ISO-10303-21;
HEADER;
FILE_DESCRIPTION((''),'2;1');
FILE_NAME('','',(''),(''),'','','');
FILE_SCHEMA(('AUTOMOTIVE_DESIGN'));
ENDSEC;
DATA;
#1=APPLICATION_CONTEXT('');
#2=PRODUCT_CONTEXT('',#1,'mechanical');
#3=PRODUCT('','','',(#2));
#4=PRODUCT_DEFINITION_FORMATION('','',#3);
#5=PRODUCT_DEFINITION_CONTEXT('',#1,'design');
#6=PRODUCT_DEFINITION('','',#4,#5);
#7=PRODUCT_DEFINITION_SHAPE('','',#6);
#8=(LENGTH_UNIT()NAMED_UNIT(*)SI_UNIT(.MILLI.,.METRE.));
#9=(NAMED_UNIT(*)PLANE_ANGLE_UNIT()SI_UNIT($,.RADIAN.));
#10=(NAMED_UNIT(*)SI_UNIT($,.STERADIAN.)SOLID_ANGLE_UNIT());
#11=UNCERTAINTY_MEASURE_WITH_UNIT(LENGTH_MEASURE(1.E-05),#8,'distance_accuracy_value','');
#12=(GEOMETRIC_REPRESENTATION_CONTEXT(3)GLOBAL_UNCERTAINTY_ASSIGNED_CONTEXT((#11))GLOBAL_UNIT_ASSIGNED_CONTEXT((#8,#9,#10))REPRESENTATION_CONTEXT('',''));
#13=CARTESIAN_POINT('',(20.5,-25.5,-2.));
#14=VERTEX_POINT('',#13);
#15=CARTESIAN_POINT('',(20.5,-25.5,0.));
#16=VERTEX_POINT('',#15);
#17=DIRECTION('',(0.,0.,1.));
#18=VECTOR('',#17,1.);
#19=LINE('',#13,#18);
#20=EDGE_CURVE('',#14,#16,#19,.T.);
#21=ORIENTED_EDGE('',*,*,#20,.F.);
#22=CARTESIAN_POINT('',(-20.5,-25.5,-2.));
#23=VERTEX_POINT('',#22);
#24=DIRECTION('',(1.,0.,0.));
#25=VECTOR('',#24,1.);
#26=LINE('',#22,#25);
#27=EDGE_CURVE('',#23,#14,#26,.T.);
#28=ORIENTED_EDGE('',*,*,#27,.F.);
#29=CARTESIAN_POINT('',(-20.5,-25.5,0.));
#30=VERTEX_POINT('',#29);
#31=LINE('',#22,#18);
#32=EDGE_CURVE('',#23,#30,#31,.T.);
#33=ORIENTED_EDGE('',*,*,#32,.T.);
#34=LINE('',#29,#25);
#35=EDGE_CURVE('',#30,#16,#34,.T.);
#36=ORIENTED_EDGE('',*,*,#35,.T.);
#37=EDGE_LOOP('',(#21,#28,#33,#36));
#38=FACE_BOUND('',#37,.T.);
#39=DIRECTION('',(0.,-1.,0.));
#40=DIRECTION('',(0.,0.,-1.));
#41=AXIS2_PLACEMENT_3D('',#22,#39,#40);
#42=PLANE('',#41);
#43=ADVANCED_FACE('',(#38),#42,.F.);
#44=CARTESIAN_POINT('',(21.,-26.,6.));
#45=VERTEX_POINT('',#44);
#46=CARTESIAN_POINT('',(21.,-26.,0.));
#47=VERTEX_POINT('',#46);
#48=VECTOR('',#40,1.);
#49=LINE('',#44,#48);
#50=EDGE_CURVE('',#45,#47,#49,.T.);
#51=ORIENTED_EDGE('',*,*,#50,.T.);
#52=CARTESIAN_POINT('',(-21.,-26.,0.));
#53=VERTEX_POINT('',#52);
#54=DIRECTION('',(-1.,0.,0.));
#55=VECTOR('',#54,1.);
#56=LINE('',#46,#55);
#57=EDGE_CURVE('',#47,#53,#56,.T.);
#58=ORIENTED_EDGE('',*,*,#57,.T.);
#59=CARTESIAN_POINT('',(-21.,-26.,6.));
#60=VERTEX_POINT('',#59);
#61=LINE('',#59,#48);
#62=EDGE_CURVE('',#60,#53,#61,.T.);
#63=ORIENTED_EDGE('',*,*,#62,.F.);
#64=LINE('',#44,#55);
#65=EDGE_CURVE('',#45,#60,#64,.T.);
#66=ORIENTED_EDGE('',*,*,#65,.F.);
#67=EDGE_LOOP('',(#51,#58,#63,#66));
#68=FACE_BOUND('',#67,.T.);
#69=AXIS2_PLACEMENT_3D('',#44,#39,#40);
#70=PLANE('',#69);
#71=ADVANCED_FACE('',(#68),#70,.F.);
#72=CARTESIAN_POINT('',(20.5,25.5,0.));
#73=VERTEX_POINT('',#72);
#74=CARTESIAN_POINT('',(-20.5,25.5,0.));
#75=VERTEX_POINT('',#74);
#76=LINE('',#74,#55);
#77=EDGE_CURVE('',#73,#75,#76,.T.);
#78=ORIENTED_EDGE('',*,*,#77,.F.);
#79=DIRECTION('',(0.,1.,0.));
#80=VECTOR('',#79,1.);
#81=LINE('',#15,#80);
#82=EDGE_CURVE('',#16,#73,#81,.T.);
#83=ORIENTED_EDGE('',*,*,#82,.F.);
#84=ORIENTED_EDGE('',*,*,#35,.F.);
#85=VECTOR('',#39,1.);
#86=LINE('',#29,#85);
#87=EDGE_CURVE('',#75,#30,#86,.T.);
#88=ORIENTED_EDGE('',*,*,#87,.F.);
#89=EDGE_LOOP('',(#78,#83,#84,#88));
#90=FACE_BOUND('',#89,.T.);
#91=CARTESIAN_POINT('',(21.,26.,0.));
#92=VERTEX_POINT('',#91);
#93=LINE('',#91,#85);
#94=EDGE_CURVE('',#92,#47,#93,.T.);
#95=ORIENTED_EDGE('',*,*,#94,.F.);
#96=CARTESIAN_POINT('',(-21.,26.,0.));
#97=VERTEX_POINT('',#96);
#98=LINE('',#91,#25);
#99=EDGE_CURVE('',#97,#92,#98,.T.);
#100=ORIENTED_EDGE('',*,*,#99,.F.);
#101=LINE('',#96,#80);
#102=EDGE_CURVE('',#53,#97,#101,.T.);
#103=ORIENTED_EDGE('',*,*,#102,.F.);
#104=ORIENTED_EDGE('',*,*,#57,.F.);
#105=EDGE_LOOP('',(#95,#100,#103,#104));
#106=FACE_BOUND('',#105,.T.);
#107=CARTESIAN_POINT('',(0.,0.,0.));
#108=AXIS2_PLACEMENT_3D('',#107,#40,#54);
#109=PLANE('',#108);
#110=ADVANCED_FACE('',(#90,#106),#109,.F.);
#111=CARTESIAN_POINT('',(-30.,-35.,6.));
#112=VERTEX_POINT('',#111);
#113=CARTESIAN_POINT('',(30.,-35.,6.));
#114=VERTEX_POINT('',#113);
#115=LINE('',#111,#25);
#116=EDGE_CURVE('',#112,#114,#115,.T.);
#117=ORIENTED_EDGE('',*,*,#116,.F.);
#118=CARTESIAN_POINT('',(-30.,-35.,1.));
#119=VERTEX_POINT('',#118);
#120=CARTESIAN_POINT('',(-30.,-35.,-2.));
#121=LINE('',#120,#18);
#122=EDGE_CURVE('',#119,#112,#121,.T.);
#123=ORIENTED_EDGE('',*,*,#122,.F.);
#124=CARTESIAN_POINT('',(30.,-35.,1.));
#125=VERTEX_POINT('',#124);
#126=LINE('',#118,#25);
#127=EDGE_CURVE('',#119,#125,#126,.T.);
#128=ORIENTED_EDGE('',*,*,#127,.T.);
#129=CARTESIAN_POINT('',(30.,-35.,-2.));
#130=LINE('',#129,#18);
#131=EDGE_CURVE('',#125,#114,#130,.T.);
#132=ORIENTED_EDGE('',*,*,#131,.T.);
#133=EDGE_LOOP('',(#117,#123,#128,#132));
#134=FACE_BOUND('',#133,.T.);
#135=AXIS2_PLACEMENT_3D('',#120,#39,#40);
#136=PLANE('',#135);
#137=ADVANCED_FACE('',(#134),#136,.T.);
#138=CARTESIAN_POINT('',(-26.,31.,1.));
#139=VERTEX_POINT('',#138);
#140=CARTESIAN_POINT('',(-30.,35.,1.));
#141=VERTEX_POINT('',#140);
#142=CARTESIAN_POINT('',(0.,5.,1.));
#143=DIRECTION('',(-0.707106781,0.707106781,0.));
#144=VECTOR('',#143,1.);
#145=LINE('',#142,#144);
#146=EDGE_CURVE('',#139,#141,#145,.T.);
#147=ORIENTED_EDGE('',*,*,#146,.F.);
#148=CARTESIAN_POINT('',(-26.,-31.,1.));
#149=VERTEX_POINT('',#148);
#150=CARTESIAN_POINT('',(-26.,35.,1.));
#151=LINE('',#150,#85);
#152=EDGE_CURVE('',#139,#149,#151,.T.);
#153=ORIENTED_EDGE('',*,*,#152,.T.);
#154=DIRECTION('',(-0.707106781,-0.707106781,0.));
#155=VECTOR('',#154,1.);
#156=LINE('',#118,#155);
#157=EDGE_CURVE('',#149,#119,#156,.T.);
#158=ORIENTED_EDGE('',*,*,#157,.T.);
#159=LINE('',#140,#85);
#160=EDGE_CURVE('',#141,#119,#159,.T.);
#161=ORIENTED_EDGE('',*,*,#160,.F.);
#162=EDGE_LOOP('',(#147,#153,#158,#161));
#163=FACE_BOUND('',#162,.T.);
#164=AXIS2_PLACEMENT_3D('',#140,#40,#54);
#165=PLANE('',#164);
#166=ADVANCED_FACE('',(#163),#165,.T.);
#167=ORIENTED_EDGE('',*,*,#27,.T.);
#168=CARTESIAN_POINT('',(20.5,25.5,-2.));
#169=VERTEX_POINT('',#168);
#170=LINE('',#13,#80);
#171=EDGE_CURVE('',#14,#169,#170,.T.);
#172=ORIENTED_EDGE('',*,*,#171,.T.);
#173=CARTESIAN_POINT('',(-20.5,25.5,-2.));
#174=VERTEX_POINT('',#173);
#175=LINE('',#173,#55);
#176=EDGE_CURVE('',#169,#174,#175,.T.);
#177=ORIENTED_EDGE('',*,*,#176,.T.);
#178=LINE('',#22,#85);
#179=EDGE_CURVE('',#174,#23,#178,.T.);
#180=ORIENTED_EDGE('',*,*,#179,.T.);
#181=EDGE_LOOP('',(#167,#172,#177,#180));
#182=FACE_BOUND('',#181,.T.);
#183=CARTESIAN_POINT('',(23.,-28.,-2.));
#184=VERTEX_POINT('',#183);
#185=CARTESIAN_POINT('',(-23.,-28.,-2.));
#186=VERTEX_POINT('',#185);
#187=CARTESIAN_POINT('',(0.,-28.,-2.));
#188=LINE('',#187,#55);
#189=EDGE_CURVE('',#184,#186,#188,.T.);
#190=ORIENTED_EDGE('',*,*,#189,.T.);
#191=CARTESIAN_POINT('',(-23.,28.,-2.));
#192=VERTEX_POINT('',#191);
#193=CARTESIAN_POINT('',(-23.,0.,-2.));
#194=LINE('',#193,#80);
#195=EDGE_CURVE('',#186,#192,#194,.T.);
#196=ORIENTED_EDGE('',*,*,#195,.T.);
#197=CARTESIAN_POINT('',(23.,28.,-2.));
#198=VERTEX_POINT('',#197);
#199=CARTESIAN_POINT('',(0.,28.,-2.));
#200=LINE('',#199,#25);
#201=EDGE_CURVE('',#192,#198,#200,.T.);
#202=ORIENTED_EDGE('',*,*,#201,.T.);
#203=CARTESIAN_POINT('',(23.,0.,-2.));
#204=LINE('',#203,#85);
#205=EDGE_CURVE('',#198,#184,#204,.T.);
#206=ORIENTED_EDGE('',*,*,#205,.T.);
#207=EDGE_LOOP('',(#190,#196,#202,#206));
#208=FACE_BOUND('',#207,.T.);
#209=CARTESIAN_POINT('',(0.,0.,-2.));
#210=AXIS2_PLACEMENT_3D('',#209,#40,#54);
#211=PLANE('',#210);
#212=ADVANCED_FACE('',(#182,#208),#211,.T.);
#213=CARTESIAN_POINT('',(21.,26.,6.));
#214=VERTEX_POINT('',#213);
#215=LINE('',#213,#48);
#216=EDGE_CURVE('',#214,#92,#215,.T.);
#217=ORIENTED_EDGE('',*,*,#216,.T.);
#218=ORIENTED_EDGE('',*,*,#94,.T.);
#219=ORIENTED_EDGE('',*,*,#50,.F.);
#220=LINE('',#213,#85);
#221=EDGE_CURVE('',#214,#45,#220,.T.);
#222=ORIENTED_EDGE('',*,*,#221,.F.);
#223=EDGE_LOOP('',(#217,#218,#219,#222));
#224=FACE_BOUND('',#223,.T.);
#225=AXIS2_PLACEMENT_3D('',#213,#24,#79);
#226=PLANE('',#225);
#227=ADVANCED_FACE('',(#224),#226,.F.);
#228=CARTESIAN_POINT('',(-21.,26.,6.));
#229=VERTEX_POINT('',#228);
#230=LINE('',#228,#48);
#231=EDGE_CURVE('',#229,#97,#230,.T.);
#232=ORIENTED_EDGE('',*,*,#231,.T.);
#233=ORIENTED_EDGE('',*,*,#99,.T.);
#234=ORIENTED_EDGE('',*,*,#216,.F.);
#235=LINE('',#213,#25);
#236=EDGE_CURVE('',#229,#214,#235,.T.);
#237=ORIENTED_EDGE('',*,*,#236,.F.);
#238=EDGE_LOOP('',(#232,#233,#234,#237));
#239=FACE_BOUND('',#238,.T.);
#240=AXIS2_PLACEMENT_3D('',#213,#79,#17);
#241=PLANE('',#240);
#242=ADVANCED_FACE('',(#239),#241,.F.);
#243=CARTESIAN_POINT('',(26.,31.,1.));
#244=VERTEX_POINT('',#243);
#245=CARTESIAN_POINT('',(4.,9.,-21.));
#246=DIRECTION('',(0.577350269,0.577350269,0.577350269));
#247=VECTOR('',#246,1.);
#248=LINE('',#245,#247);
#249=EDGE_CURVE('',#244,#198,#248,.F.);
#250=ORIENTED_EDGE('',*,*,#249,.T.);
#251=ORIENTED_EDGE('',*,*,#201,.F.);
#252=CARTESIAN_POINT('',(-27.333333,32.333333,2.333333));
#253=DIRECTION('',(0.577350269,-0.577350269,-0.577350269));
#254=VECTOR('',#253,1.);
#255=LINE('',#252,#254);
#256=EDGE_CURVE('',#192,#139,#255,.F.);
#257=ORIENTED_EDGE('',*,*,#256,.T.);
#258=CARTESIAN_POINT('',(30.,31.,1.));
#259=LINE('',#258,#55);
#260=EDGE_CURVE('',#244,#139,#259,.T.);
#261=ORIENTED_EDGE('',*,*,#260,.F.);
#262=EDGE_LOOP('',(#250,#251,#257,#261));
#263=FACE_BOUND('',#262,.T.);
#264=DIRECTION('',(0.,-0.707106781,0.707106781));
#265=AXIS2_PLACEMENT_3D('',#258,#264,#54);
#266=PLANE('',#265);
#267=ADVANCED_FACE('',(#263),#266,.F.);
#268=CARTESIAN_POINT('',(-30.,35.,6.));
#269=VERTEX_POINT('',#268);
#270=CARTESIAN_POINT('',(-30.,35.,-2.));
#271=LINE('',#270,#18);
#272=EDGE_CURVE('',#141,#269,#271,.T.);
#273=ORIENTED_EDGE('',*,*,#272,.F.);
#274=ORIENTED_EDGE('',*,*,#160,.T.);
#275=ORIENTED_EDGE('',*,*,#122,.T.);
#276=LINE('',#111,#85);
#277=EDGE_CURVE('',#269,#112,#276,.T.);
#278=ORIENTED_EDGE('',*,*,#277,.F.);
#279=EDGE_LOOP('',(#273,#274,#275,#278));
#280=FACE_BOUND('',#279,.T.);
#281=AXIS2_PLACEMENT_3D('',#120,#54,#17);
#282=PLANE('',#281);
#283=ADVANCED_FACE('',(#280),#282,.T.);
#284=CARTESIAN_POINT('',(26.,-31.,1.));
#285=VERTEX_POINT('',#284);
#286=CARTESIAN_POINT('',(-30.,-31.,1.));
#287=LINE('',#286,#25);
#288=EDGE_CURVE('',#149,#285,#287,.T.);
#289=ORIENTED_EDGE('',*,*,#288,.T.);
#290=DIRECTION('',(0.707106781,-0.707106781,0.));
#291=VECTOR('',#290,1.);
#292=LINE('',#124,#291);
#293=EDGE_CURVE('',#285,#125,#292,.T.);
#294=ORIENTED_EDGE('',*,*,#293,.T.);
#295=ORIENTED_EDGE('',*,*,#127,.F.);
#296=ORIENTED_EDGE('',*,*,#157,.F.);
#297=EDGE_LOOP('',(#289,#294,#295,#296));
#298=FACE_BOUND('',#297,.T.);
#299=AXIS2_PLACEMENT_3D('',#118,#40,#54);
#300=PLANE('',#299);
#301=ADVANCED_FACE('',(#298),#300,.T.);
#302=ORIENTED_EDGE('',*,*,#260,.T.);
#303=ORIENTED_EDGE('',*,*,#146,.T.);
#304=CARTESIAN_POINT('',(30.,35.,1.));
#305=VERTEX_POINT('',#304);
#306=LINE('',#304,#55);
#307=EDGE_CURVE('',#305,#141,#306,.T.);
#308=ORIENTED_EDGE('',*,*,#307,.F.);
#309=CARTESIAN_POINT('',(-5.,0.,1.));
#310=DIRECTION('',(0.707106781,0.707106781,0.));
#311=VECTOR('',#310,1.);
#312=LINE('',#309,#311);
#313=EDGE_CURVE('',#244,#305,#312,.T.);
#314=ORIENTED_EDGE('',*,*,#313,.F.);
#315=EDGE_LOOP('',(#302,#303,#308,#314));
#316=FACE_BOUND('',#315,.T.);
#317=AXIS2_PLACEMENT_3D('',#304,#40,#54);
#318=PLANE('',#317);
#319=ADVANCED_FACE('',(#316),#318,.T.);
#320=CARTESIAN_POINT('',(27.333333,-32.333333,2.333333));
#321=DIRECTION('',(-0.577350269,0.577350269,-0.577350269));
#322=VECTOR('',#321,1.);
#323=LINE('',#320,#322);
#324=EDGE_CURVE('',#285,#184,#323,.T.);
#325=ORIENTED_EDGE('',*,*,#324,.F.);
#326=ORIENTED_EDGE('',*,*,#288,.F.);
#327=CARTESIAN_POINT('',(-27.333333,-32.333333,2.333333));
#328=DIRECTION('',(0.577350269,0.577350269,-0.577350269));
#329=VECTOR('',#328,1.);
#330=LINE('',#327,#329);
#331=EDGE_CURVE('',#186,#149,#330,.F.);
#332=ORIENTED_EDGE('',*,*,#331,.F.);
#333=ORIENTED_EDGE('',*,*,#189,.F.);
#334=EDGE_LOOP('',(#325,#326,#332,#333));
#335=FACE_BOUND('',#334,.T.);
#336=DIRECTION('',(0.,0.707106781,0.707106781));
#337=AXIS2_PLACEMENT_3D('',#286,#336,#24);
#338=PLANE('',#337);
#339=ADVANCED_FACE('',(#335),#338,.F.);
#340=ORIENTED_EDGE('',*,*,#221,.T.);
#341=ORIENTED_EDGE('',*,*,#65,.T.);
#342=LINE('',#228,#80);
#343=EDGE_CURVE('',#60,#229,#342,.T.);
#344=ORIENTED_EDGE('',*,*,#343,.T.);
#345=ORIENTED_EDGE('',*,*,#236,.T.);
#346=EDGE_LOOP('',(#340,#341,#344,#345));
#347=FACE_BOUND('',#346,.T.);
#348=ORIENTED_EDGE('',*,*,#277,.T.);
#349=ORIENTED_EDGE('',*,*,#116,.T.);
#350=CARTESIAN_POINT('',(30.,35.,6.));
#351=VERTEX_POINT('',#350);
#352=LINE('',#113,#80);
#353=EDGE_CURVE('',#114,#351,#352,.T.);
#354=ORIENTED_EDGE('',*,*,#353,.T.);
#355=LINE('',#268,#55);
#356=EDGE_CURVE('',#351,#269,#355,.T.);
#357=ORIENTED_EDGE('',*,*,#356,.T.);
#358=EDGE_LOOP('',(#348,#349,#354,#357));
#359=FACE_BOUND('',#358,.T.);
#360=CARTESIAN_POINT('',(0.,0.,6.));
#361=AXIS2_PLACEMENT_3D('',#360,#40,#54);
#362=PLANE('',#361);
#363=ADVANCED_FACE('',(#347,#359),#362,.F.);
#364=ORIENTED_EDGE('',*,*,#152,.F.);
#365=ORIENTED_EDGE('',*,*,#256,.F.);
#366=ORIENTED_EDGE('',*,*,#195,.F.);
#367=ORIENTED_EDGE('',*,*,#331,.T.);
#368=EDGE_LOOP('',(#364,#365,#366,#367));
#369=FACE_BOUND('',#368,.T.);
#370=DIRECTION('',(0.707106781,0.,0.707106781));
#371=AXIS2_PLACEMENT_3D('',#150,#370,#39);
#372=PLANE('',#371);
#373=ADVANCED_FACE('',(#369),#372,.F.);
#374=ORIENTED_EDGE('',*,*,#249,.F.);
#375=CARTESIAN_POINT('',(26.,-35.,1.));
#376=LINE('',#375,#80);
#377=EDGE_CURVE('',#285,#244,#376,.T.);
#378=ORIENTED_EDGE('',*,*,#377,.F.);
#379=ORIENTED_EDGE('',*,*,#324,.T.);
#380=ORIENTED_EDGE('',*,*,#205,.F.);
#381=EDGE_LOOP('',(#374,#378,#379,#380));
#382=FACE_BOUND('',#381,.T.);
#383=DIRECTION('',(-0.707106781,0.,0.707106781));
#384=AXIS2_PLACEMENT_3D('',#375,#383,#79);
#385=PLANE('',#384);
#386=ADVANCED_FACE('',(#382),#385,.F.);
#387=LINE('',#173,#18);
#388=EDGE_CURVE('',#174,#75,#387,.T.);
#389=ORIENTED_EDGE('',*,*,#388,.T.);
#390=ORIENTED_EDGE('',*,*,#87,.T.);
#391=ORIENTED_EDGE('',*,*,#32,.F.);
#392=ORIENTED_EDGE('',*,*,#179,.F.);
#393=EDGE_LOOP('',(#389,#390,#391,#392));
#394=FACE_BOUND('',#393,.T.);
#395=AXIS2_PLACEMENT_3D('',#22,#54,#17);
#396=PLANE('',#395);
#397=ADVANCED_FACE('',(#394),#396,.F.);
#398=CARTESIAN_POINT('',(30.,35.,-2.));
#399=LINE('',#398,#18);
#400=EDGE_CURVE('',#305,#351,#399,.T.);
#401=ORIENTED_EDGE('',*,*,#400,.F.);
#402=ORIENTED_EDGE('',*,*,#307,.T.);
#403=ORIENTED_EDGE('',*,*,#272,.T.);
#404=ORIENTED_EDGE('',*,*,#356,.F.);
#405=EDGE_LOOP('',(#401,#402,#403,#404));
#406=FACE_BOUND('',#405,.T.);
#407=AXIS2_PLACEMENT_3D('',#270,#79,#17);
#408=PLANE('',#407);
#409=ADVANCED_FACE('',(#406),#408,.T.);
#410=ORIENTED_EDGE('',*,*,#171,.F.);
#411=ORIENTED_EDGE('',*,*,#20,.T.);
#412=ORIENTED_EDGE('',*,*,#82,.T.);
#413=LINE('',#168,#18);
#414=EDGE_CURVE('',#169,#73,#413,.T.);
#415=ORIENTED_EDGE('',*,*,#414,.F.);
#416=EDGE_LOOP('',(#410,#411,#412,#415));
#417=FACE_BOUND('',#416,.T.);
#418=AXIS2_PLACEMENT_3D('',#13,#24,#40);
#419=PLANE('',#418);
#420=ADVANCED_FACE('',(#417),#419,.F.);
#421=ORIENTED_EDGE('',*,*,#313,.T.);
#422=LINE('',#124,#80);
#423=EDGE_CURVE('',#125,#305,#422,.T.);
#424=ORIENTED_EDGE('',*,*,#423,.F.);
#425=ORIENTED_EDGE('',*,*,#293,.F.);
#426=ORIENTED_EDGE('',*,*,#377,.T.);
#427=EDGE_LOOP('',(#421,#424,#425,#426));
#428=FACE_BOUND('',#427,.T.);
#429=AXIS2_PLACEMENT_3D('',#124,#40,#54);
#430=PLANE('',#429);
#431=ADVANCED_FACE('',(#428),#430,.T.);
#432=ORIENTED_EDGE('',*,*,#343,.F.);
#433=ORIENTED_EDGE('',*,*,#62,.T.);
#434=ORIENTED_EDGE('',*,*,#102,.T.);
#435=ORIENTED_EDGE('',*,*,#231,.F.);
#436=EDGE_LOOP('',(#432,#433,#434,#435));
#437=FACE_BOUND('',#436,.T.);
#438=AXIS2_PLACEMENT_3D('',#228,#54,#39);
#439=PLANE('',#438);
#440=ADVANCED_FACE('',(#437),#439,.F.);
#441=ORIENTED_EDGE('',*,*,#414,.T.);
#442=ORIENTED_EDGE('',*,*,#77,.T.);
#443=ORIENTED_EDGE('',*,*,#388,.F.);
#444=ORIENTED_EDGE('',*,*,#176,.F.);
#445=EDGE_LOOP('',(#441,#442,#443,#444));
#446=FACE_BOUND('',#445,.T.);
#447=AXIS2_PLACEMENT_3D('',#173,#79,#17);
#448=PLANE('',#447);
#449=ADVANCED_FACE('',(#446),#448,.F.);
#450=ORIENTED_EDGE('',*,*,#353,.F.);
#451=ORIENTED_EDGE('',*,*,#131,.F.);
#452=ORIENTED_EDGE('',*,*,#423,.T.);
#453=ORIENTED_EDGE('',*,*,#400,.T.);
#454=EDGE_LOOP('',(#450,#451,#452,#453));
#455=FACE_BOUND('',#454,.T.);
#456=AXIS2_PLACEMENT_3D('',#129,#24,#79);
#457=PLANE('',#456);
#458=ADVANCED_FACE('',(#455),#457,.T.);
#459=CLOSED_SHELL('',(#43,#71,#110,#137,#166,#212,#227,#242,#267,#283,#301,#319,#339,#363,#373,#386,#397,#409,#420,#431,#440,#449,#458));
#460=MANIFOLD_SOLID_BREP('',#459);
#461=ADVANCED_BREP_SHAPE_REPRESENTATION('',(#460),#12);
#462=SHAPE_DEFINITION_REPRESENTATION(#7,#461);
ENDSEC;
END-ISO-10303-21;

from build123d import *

# Parameters (mm, degrees)
EXTRUDE_1_DEPTH      = 6
EXTRUDE_1_DEPTH_BACK = 2
SKETCH_1_W           = 60
SKETCH_1_H           = 70
SKETCH_1_W_2         = 41
SKETCH_1_H_2         = 51
SKETCH_2_W           = 42
SKETCH_2_H           = 52
CUT_EXTRUDE_2_DEPTH  = 47.486557197
SKETCH_3_W           = 4
SKETCH_3_H           = 3
CHAMFER_2_SIZE       = 3


with BuildPart() as part:
    # Эскиз1 → Бобышка-Вытянуть1 (new, two sides: drawn at the far end of the back side and taken through both)
    with BuildSketch(Plane.XY.offset(-EXTRUDE_1_DEPTH_BACK)):
        Rectangle(SKETCH_1_W, SKETCH_1_H)
        Rectangle(SKETCH_1_W_2, SKETCH_1_H_2, mode=Mode.SUBTRACT)
    extrude(amount=EXTRUDE_1_DEPTH + EXTRUDE_1_DEPTH_BACK)

    # Эскиз2 → Вырез-Вытянуть2 (cut, through all)
    with BuildSketch(Plane(origin=(0, 0, 0), x_dir=(-1, 0, 0), z_dir=(0, 0, -1))):
        Rectangle(SKETCH_2_W, SKETCH_2_H)
    extrude(amount=-CUT_EXTRUDE_2_DEPTH, mode=Mode.SUBTRACT)

    # Вырез-По траектории1: sweep along a path in Эскиз4
    with BuildLine(Plane(origin=(0, 0, -2), x_dir=(-1, 0, 0), z_dir=(0, 0, -1))) as sweep_1_path:
        Line((-30, 35), (-30, -35))
        Line((-30, -35), (30, -35))
        Line((30, -35), (30, 35))
        Line((30, 35), (-30, 35))
    # Эскиз3 → Вырез-По траектории1 (sweep, cut)
    with BuildSketch(Plane(origin=(0, -35, 0), x_dir=(-1, 0, 0), z_dir=(0, -1, 0))):
        with Locations((-28, 0.5)):
            Rectangle(SKETCH_3_W, SKETCH_3_H)
    sweep(path=sweep_1_path.line, transition=Transition.RIGHT, mode=Mode.SUBTRACT)

    # Фаска2
    chamfer_2_edges = [part.edges().sort_by_distance(p)[0] for p in [
        (26, 0, -2),
        (0, 31, -2),
        (-26, 0, -2),
        (0, -31, -2),
    ]]
    chamfer(chamfer_2_edges, length=CHAMFER_2_SIZE - 0.0001)  # a hair under: the kernel refuses the full size


solid = part.part
